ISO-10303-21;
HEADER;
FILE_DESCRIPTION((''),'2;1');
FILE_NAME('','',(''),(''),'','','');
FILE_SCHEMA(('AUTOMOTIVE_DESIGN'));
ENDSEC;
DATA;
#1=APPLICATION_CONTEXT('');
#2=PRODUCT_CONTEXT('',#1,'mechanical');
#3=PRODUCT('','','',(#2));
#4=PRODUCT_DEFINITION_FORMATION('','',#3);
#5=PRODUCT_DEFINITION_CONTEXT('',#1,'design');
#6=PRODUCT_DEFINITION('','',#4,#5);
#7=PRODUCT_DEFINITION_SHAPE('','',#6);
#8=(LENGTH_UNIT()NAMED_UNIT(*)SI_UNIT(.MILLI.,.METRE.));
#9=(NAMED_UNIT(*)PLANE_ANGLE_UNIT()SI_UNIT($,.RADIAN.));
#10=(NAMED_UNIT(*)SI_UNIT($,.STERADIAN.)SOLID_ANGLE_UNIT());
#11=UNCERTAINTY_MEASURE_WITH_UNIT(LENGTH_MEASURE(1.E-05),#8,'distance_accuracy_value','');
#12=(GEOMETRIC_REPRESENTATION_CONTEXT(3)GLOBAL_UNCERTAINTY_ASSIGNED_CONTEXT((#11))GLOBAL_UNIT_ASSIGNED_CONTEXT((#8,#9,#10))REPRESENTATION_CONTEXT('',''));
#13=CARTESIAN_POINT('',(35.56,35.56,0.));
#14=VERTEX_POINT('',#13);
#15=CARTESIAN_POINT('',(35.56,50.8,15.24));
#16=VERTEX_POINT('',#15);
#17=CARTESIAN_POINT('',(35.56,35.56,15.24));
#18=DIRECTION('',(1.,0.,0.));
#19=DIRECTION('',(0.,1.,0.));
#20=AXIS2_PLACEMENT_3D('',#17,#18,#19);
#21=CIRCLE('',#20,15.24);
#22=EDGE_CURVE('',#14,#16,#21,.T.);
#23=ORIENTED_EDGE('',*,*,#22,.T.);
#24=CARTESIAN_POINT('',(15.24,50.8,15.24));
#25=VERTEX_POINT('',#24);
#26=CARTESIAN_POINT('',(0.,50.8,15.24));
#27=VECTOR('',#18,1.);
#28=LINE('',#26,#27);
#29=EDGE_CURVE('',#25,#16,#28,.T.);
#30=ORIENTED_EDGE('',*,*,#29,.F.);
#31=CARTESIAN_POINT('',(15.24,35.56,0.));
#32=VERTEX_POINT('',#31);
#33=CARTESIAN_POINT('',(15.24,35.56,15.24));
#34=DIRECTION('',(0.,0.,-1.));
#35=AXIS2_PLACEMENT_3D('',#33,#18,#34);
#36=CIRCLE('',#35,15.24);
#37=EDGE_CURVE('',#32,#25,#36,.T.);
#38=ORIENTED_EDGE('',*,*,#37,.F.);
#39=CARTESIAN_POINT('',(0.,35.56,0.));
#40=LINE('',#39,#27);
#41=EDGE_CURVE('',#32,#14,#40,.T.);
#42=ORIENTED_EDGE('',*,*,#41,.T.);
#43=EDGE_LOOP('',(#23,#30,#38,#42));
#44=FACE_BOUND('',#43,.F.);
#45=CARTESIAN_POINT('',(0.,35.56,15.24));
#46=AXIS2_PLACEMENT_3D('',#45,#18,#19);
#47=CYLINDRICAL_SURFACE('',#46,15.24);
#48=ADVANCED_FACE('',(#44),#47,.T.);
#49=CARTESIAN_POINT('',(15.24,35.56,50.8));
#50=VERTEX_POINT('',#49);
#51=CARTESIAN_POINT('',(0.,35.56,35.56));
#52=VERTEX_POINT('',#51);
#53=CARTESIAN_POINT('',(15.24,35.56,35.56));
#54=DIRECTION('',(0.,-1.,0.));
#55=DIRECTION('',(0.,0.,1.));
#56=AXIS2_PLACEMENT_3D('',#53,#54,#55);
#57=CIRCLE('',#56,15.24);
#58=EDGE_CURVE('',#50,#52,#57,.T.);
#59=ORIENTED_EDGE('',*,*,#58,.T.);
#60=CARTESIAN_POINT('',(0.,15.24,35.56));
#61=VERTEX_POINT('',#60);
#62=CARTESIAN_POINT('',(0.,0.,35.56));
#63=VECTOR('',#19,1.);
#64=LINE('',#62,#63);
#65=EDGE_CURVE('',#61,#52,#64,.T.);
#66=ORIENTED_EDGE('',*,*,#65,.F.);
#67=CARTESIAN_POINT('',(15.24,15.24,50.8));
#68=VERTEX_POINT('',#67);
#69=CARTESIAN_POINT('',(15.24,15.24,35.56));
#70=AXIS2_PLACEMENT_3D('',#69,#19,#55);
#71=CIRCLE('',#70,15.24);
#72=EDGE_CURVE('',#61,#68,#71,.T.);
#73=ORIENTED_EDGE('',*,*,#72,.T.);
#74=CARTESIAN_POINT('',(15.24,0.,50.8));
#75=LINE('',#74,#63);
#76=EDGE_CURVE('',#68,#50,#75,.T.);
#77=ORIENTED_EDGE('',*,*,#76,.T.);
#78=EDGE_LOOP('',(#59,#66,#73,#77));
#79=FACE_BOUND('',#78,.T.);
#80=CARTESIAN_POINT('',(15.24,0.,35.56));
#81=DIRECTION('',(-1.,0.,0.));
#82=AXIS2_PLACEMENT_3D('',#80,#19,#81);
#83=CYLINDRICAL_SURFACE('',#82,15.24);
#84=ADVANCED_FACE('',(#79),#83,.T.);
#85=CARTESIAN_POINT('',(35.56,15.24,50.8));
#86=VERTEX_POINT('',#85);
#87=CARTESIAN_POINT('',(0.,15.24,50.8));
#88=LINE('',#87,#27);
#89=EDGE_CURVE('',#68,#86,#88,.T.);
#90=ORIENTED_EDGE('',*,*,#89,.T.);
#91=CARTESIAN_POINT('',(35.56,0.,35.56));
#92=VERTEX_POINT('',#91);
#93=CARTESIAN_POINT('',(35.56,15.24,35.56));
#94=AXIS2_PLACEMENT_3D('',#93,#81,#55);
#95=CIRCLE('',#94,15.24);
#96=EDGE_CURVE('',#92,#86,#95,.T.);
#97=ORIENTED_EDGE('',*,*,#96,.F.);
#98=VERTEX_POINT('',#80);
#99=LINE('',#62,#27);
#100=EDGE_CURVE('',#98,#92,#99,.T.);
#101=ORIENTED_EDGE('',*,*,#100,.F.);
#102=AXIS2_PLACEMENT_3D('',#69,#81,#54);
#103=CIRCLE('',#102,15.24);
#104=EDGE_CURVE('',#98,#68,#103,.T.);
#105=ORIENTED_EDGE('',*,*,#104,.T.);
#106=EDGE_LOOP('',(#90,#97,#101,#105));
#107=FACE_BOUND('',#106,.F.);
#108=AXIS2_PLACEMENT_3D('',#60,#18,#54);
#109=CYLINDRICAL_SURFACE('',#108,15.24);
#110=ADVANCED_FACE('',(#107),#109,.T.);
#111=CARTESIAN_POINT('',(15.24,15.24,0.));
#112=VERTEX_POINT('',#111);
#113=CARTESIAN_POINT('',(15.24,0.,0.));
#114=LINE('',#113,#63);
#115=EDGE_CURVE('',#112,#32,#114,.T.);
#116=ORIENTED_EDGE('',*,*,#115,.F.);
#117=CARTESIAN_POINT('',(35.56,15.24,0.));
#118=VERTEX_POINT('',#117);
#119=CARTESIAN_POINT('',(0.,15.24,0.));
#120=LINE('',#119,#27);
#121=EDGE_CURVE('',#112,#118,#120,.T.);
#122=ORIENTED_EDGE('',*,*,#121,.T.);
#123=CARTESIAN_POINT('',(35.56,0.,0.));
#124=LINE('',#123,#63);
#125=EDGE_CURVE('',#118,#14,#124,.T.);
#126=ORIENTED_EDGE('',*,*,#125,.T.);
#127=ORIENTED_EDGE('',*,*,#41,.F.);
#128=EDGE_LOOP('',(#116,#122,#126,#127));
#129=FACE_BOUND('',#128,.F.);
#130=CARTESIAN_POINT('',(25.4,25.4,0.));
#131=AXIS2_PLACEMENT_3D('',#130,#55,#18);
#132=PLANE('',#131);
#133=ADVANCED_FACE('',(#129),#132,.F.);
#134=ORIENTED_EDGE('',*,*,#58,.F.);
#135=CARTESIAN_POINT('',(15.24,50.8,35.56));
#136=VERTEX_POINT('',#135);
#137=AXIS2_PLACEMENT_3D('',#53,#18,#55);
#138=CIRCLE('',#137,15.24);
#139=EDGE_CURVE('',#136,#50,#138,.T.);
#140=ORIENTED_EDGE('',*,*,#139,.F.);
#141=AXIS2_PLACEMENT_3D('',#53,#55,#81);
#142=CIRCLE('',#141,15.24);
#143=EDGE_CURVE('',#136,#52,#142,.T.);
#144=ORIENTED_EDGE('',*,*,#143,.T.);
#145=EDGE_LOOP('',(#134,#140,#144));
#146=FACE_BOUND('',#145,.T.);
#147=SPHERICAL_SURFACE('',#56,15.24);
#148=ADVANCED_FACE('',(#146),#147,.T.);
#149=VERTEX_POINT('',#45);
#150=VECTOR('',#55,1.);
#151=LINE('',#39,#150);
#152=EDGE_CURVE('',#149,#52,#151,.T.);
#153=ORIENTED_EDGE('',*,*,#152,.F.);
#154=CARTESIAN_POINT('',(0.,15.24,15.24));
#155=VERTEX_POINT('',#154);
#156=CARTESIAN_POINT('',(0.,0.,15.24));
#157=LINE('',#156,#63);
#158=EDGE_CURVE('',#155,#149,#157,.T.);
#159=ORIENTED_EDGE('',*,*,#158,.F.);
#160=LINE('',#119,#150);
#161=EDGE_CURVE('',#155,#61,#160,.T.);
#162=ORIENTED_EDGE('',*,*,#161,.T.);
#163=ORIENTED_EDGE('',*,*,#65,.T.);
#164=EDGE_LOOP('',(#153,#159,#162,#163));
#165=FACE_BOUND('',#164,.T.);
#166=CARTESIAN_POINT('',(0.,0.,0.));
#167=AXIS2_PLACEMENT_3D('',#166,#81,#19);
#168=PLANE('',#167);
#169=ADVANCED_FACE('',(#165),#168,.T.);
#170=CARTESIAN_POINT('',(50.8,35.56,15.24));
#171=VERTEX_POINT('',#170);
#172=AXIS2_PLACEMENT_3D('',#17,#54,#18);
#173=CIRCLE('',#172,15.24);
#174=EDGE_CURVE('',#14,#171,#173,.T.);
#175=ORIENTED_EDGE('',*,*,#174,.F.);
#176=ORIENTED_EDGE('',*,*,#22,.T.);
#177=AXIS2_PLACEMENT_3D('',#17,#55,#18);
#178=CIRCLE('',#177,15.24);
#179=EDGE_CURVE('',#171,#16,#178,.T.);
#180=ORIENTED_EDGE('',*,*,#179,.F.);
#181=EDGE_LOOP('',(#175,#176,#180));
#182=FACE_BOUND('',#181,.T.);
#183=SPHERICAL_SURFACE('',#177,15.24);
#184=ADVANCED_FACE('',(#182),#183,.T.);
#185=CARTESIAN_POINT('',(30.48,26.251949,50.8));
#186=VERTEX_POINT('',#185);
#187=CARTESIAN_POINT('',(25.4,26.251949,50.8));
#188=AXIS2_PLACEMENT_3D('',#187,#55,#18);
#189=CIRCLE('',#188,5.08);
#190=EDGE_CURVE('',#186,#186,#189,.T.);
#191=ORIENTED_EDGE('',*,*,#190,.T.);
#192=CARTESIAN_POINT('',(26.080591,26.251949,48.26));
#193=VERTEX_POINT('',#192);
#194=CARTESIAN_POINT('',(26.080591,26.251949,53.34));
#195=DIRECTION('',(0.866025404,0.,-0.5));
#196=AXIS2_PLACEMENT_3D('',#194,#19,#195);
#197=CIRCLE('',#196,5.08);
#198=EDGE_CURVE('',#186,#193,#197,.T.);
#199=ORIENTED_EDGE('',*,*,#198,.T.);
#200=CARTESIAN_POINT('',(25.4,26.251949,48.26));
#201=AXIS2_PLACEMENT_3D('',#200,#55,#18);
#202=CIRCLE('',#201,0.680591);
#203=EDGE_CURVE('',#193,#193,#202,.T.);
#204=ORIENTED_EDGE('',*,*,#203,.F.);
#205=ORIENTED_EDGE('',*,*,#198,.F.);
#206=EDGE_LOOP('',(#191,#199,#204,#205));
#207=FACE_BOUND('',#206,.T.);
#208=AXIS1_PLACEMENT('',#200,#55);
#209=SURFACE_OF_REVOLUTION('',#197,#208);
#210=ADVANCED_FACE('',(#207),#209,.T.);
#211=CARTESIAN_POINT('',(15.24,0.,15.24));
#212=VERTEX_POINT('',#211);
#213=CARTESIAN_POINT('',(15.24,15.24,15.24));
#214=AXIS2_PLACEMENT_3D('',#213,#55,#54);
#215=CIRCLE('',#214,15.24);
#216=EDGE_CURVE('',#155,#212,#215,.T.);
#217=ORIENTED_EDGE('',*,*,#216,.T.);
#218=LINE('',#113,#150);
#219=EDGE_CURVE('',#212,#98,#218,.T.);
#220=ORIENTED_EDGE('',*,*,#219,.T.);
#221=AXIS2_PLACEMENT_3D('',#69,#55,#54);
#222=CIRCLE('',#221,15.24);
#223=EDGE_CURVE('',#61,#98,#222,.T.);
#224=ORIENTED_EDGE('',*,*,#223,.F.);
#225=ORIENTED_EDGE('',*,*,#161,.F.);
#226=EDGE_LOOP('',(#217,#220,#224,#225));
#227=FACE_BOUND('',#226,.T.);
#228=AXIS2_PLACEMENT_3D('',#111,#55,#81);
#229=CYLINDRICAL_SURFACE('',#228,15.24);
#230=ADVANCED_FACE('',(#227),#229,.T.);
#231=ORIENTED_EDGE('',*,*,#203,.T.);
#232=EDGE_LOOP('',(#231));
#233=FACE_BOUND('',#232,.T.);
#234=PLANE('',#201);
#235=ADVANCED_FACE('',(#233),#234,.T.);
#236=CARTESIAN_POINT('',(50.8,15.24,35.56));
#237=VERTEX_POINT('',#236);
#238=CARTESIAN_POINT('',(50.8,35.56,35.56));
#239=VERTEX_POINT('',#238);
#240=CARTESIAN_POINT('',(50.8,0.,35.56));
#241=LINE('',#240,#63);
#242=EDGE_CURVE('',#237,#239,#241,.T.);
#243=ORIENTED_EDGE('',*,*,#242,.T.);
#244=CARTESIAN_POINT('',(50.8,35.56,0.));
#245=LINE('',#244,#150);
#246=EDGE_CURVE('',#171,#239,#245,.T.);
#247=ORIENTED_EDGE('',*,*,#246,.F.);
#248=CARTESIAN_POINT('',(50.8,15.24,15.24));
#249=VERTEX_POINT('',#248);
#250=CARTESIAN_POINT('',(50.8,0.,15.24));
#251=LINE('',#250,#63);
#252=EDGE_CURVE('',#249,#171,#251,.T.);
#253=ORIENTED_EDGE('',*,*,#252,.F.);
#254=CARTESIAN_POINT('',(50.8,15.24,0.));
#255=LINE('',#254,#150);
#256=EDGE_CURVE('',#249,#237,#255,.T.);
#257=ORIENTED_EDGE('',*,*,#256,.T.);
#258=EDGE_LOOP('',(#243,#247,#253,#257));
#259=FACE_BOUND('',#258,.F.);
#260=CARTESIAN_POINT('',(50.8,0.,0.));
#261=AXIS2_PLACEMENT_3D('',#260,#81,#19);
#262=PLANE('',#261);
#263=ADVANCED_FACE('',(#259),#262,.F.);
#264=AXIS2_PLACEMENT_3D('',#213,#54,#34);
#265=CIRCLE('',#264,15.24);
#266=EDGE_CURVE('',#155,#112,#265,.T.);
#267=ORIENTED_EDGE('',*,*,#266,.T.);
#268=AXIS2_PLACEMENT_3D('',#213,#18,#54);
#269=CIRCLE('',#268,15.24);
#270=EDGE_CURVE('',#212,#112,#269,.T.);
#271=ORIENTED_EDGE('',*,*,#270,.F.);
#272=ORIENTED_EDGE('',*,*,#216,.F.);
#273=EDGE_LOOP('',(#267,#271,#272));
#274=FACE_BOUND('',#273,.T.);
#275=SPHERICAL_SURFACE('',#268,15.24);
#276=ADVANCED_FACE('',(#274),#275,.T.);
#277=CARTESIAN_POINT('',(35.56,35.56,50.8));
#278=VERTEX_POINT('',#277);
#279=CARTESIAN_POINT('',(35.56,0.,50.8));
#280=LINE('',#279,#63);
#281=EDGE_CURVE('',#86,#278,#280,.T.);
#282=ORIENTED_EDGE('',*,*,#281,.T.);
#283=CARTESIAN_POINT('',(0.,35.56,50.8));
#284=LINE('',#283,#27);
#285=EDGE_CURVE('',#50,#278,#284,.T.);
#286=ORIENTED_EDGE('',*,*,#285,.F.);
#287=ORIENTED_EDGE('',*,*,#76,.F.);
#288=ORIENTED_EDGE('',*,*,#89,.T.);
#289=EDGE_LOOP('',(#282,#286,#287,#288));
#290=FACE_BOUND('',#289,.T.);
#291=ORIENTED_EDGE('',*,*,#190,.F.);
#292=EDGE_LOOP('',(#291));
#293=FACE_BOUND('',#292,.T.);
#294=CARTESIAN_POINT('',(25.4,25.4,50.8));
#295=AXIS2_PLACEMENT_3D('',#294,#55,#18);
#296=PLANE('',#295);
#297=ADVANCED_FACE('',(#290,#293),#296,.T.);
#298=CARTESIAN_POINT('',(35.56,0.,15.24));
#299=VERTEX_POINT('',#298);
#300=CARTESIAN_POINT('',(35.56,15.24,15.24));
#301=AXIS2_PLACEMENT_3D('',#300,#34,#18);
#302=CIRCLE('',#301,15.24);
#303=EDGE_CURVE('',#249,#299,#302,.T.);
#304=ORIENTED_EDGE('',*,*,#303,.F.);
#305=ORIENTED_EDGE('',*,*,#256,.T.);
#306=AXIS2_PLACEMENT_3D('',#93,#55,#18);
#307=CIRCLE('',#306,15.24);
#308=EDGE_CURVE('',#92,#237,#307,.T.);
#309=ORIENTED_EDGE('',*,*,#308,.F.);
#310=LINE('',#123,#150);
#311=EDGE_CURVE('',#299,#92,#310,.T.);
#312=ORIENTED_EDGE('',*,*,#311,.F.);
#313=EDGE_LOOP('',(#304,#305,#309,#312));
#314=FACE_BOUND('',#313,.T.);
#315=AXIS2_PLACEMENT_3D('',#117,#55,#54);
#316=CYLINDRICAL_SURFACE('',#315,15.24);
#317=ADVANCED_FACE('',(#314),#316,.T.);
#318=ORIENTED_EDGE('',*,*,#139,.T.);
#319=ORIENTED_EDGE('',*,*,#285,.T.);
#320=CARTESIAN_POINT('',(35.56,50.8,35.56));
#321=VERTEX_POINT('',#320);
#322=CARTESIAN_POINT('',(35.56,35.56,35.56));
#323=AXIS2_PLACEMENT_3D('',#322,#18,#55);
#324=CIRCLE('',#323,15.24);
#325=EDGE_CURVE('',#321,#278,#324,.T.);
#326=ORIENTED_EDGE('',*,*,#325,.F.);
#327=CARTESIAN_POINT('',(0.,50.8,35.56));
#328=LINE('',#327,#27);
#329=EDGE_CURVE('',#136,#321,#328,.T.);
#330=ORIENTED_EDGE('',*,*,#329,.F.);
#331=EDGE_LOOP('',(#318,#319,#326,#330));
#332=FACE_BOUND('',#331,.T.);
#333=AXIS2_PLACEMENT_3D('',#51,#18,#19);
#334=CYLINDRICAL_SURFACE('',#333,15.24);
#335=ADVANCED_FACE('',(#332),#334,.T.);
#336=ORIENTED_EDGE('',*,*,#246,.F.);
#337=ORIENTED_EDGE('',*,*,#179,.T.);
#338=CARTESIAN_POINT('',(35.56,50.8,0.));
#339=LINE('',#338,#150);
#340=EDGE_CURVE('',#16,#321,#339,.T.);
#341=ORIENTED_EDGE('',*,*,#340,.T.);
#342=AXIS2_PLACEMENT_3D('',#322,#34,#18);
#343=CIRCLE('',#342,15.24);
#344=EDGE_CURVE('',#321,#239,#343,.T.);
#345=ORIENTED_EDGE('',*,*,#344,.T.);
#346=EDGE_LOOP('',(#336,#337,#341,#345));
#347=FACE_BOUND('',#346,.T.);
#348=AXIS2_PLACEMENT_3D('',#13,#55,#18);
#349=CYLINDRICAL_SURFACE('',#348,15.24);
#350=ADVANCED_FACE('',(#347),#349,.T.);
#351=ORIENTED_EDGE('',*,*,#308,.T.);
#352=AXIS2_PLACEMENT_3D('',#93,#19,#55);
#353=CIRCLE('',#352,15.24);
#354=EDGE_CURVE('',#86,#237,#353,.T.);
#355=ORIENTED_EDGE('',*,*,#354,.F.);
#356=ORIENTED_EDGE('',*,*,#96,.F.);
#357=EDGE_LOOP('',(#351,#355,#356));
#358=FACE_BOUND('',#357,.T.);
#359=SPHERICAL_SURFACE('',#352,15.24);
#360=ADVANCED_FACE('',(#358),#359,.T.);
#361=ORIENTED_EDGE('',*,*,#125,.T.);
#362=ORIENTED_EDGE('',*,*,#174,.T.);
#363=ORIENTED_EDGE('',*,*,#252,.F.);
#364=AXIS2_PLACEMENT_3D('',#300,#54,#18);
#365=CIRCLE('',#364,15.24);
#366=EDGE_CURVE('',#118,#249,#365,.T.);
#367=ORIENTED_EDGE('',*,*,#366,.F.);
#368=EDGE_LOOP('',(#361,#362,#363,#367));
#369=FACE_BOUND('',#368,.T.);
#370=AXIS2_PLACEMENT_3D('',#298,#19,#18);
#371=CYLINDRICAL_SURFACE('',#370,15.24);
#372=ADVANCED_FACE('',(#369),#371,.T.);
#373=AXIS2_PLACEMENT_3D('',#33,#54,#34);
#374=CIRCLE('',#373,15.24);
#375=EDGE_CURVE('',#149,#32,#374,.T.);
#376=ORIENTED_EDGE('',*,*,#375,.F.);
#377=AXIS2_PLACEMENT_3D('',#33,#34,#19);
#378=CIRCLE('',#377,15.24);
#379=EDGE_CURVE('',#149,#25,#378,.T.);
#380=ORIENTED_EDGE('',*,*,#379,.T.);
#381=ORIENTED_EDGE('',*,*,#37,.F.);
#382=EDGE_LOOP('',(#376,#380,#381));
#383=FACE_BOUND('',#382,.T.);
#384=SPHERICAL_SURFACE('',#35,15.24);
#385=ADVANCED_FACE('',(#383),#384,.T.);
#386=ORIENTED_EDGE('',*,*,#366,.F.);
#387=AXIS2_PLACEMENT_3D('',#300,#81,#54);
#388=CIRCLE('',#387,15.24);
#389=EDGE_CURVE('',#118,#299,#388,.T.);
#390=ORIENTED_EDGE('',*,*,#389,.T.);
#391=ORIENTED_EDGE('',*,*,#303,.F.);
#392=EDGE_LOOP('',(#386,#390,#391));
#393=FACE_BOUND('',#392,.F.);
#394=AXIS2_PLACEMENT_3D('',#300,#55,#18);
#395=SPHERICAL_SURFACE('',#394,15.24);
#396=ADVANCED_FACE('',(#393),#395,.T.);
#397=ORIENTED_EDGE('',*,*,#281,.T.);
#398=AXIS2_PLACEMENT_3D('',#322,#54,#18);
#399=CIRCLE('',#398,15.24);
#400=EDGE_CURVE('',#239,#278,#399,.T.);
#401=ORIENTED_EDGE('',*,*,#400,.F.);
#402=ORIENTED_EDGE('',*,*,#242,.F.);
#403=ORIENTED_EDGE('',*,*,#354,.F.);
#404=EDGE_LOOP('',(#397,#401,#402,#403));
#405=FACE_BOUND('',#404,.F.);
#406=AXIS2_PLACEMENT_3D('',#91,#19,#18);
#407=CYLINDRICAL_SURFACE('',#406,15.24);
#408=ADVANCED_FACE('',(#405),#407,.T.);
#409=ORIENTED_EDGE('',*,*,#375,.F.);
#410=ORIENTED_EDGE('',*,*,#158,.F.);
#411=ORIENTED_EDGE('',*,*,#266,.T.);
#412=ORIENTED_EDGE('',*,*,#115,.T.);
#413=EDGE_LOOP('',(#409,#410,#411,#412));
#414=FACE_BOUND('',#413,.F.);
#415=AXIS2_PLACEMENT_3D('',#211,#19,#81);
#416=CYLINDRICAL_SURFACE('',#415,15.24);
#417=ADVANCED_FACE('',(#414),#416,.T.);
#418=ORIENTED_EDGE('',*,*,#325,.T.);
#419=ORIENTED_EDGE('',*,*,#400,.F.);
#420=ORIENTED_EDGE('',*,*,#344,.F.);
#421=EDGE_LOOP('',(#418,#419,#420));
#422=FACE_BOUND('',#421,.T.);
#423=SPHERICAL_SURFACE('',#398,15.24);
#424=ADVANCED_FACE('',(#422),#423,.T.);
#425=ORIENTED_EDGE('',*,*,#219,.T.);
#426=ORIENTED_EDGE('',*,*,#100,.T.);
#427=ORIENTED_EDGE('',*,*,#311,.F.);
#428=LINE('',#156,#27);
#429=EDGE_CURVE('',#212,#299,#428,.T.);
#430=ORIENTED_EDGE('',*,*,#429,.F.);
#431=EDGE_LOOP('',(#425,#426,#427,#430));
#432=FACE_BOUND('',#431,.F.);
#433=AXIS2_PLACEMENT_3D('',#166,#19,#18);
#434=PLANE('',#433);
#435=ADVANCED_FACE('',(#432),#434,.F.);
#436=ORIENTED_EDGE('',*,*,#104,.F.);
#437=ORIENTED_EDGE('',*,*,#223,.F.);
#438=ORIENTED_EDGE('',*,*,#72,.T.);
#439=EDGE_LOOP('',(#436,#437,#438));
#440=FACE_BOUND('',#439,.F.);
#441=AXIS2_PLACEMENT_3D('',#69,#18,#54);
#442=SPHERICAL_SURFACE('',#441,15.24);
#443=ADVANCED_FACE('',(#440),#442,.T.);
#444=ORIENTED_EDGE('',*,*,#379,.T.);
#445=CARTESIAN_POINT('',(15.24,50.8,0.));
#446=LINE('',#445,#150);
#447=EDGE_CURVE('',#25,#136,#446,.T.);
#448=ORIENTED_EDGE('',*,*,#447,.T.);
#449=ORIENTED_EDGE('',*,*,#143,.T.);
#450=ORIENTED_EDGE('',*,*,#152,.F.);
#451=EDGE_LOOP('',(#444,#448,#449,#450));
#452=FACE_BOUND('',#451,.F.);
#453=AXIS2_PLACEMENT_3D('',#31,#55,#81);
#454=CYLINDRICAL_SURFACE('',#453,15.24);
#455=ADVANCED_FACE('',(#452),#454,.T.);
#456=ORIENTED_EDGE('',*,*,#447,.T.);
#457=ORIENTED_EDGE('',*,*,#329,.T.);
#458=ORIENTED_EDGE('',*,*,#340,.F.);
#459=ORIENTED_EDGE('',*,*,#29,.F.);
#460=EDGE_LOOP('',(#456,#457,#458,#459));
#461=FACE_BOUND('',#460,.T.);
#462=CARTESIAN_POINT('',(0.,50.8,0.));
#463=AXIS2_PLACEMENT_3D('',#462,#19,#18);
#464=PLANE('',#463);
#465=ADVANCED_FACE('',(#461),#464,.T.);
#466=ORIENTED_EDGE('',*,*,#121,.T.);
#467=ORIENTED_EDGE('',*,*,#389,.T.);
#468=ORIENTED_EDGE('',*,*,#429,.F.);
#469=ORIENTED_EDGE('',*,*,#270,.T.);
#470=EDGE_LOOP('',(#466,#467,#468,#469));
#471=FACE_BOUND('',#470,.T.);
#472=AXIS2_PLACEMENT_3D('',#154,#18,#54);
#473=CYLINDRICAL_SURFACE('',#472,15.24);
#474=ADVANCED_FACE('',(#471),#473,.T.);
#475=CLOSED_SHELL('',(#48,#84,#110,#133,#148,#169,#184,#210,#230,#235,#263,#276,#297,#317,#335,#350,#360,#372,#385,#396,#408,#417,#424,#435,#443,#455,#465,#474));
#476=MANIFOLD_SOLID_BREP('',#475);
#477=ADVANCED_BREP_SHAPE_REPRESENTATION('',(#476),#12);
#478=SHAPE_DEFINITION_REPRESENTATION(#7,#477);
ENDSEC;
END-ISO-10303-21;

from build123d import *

# Parameters (mm, degrees)
F0_W     = 50.8
F0_H     = 50.8
F1_DEPTH = 50.8
F2_R     = 15.24
F3_R     = 5.08
F4_DEPTH = 2.54


# Not quite as in the source:
# - a fillet or chamfer that OpenCascade refuses, or shapes differently, is made with other operations: its cross-section is extruded or revolved along the edge and cut away or added


with BuildPart() as f1:
    # F0 (on Top) → F1 (new body)
    with BuildSketch(Plane.XY):
        with Locations((25.4, 25.4)):
            Rectangle(F0_W, F0_H)
    extrude(amount=F1_DEPTH)

    # F2
    f2_edges = [f1.edges().sort_by_distance(p)[0] for p in [
        (50.8, 25.4, 50.8),
        (25.4, 0, 50.8),
        (50.8, 0, 25.4),
        (50.8, 50.8, 25.4),
        (50.8, 25.4, 0),
        (25.4, 0, 0),
        (0, 0, 25.4),
        (0, 25.4, 50.8),
        (25.4, 50.8, 50.8),
        (25.4, 50.8, 0),
        (0, 25.4, 0),
        (0, 50.8, 25.4),
    ]]
    fillet(f2_edges, radius=F2_R)

    # F3 (on face) → F4 (cut)
    with BuildSketch(Plane.XY.offset(50.8)):
        with Locations((25.4, 26.2519493699)):
            Circle(F3_R)
    extrude(amount=-F4_DEPTH, mode=Mode.SUBTRACT)

    # F5: fillet of radius 5.08 on 1 edges, made by hand

    # F5_s1 → F5_t2 (revolve)
    with BuildSketch(Plane.XZ.offset(-26.2519493699)):
        with BuildLine():
            ThreePointArc((30.48, 50.8), (28.6205909488, 48.9405909488), (26.0805909488, 48.26))
            Line((26.0805909488, 48.26), (30.48, 48.26))
            Line((30.48, 48.26), (30.48, 50.8))
        make_face()
    revolve(axis=Axis((25.4, 26.2519493699, 48.26), (0, 0, 1)))


solid = f1.part
